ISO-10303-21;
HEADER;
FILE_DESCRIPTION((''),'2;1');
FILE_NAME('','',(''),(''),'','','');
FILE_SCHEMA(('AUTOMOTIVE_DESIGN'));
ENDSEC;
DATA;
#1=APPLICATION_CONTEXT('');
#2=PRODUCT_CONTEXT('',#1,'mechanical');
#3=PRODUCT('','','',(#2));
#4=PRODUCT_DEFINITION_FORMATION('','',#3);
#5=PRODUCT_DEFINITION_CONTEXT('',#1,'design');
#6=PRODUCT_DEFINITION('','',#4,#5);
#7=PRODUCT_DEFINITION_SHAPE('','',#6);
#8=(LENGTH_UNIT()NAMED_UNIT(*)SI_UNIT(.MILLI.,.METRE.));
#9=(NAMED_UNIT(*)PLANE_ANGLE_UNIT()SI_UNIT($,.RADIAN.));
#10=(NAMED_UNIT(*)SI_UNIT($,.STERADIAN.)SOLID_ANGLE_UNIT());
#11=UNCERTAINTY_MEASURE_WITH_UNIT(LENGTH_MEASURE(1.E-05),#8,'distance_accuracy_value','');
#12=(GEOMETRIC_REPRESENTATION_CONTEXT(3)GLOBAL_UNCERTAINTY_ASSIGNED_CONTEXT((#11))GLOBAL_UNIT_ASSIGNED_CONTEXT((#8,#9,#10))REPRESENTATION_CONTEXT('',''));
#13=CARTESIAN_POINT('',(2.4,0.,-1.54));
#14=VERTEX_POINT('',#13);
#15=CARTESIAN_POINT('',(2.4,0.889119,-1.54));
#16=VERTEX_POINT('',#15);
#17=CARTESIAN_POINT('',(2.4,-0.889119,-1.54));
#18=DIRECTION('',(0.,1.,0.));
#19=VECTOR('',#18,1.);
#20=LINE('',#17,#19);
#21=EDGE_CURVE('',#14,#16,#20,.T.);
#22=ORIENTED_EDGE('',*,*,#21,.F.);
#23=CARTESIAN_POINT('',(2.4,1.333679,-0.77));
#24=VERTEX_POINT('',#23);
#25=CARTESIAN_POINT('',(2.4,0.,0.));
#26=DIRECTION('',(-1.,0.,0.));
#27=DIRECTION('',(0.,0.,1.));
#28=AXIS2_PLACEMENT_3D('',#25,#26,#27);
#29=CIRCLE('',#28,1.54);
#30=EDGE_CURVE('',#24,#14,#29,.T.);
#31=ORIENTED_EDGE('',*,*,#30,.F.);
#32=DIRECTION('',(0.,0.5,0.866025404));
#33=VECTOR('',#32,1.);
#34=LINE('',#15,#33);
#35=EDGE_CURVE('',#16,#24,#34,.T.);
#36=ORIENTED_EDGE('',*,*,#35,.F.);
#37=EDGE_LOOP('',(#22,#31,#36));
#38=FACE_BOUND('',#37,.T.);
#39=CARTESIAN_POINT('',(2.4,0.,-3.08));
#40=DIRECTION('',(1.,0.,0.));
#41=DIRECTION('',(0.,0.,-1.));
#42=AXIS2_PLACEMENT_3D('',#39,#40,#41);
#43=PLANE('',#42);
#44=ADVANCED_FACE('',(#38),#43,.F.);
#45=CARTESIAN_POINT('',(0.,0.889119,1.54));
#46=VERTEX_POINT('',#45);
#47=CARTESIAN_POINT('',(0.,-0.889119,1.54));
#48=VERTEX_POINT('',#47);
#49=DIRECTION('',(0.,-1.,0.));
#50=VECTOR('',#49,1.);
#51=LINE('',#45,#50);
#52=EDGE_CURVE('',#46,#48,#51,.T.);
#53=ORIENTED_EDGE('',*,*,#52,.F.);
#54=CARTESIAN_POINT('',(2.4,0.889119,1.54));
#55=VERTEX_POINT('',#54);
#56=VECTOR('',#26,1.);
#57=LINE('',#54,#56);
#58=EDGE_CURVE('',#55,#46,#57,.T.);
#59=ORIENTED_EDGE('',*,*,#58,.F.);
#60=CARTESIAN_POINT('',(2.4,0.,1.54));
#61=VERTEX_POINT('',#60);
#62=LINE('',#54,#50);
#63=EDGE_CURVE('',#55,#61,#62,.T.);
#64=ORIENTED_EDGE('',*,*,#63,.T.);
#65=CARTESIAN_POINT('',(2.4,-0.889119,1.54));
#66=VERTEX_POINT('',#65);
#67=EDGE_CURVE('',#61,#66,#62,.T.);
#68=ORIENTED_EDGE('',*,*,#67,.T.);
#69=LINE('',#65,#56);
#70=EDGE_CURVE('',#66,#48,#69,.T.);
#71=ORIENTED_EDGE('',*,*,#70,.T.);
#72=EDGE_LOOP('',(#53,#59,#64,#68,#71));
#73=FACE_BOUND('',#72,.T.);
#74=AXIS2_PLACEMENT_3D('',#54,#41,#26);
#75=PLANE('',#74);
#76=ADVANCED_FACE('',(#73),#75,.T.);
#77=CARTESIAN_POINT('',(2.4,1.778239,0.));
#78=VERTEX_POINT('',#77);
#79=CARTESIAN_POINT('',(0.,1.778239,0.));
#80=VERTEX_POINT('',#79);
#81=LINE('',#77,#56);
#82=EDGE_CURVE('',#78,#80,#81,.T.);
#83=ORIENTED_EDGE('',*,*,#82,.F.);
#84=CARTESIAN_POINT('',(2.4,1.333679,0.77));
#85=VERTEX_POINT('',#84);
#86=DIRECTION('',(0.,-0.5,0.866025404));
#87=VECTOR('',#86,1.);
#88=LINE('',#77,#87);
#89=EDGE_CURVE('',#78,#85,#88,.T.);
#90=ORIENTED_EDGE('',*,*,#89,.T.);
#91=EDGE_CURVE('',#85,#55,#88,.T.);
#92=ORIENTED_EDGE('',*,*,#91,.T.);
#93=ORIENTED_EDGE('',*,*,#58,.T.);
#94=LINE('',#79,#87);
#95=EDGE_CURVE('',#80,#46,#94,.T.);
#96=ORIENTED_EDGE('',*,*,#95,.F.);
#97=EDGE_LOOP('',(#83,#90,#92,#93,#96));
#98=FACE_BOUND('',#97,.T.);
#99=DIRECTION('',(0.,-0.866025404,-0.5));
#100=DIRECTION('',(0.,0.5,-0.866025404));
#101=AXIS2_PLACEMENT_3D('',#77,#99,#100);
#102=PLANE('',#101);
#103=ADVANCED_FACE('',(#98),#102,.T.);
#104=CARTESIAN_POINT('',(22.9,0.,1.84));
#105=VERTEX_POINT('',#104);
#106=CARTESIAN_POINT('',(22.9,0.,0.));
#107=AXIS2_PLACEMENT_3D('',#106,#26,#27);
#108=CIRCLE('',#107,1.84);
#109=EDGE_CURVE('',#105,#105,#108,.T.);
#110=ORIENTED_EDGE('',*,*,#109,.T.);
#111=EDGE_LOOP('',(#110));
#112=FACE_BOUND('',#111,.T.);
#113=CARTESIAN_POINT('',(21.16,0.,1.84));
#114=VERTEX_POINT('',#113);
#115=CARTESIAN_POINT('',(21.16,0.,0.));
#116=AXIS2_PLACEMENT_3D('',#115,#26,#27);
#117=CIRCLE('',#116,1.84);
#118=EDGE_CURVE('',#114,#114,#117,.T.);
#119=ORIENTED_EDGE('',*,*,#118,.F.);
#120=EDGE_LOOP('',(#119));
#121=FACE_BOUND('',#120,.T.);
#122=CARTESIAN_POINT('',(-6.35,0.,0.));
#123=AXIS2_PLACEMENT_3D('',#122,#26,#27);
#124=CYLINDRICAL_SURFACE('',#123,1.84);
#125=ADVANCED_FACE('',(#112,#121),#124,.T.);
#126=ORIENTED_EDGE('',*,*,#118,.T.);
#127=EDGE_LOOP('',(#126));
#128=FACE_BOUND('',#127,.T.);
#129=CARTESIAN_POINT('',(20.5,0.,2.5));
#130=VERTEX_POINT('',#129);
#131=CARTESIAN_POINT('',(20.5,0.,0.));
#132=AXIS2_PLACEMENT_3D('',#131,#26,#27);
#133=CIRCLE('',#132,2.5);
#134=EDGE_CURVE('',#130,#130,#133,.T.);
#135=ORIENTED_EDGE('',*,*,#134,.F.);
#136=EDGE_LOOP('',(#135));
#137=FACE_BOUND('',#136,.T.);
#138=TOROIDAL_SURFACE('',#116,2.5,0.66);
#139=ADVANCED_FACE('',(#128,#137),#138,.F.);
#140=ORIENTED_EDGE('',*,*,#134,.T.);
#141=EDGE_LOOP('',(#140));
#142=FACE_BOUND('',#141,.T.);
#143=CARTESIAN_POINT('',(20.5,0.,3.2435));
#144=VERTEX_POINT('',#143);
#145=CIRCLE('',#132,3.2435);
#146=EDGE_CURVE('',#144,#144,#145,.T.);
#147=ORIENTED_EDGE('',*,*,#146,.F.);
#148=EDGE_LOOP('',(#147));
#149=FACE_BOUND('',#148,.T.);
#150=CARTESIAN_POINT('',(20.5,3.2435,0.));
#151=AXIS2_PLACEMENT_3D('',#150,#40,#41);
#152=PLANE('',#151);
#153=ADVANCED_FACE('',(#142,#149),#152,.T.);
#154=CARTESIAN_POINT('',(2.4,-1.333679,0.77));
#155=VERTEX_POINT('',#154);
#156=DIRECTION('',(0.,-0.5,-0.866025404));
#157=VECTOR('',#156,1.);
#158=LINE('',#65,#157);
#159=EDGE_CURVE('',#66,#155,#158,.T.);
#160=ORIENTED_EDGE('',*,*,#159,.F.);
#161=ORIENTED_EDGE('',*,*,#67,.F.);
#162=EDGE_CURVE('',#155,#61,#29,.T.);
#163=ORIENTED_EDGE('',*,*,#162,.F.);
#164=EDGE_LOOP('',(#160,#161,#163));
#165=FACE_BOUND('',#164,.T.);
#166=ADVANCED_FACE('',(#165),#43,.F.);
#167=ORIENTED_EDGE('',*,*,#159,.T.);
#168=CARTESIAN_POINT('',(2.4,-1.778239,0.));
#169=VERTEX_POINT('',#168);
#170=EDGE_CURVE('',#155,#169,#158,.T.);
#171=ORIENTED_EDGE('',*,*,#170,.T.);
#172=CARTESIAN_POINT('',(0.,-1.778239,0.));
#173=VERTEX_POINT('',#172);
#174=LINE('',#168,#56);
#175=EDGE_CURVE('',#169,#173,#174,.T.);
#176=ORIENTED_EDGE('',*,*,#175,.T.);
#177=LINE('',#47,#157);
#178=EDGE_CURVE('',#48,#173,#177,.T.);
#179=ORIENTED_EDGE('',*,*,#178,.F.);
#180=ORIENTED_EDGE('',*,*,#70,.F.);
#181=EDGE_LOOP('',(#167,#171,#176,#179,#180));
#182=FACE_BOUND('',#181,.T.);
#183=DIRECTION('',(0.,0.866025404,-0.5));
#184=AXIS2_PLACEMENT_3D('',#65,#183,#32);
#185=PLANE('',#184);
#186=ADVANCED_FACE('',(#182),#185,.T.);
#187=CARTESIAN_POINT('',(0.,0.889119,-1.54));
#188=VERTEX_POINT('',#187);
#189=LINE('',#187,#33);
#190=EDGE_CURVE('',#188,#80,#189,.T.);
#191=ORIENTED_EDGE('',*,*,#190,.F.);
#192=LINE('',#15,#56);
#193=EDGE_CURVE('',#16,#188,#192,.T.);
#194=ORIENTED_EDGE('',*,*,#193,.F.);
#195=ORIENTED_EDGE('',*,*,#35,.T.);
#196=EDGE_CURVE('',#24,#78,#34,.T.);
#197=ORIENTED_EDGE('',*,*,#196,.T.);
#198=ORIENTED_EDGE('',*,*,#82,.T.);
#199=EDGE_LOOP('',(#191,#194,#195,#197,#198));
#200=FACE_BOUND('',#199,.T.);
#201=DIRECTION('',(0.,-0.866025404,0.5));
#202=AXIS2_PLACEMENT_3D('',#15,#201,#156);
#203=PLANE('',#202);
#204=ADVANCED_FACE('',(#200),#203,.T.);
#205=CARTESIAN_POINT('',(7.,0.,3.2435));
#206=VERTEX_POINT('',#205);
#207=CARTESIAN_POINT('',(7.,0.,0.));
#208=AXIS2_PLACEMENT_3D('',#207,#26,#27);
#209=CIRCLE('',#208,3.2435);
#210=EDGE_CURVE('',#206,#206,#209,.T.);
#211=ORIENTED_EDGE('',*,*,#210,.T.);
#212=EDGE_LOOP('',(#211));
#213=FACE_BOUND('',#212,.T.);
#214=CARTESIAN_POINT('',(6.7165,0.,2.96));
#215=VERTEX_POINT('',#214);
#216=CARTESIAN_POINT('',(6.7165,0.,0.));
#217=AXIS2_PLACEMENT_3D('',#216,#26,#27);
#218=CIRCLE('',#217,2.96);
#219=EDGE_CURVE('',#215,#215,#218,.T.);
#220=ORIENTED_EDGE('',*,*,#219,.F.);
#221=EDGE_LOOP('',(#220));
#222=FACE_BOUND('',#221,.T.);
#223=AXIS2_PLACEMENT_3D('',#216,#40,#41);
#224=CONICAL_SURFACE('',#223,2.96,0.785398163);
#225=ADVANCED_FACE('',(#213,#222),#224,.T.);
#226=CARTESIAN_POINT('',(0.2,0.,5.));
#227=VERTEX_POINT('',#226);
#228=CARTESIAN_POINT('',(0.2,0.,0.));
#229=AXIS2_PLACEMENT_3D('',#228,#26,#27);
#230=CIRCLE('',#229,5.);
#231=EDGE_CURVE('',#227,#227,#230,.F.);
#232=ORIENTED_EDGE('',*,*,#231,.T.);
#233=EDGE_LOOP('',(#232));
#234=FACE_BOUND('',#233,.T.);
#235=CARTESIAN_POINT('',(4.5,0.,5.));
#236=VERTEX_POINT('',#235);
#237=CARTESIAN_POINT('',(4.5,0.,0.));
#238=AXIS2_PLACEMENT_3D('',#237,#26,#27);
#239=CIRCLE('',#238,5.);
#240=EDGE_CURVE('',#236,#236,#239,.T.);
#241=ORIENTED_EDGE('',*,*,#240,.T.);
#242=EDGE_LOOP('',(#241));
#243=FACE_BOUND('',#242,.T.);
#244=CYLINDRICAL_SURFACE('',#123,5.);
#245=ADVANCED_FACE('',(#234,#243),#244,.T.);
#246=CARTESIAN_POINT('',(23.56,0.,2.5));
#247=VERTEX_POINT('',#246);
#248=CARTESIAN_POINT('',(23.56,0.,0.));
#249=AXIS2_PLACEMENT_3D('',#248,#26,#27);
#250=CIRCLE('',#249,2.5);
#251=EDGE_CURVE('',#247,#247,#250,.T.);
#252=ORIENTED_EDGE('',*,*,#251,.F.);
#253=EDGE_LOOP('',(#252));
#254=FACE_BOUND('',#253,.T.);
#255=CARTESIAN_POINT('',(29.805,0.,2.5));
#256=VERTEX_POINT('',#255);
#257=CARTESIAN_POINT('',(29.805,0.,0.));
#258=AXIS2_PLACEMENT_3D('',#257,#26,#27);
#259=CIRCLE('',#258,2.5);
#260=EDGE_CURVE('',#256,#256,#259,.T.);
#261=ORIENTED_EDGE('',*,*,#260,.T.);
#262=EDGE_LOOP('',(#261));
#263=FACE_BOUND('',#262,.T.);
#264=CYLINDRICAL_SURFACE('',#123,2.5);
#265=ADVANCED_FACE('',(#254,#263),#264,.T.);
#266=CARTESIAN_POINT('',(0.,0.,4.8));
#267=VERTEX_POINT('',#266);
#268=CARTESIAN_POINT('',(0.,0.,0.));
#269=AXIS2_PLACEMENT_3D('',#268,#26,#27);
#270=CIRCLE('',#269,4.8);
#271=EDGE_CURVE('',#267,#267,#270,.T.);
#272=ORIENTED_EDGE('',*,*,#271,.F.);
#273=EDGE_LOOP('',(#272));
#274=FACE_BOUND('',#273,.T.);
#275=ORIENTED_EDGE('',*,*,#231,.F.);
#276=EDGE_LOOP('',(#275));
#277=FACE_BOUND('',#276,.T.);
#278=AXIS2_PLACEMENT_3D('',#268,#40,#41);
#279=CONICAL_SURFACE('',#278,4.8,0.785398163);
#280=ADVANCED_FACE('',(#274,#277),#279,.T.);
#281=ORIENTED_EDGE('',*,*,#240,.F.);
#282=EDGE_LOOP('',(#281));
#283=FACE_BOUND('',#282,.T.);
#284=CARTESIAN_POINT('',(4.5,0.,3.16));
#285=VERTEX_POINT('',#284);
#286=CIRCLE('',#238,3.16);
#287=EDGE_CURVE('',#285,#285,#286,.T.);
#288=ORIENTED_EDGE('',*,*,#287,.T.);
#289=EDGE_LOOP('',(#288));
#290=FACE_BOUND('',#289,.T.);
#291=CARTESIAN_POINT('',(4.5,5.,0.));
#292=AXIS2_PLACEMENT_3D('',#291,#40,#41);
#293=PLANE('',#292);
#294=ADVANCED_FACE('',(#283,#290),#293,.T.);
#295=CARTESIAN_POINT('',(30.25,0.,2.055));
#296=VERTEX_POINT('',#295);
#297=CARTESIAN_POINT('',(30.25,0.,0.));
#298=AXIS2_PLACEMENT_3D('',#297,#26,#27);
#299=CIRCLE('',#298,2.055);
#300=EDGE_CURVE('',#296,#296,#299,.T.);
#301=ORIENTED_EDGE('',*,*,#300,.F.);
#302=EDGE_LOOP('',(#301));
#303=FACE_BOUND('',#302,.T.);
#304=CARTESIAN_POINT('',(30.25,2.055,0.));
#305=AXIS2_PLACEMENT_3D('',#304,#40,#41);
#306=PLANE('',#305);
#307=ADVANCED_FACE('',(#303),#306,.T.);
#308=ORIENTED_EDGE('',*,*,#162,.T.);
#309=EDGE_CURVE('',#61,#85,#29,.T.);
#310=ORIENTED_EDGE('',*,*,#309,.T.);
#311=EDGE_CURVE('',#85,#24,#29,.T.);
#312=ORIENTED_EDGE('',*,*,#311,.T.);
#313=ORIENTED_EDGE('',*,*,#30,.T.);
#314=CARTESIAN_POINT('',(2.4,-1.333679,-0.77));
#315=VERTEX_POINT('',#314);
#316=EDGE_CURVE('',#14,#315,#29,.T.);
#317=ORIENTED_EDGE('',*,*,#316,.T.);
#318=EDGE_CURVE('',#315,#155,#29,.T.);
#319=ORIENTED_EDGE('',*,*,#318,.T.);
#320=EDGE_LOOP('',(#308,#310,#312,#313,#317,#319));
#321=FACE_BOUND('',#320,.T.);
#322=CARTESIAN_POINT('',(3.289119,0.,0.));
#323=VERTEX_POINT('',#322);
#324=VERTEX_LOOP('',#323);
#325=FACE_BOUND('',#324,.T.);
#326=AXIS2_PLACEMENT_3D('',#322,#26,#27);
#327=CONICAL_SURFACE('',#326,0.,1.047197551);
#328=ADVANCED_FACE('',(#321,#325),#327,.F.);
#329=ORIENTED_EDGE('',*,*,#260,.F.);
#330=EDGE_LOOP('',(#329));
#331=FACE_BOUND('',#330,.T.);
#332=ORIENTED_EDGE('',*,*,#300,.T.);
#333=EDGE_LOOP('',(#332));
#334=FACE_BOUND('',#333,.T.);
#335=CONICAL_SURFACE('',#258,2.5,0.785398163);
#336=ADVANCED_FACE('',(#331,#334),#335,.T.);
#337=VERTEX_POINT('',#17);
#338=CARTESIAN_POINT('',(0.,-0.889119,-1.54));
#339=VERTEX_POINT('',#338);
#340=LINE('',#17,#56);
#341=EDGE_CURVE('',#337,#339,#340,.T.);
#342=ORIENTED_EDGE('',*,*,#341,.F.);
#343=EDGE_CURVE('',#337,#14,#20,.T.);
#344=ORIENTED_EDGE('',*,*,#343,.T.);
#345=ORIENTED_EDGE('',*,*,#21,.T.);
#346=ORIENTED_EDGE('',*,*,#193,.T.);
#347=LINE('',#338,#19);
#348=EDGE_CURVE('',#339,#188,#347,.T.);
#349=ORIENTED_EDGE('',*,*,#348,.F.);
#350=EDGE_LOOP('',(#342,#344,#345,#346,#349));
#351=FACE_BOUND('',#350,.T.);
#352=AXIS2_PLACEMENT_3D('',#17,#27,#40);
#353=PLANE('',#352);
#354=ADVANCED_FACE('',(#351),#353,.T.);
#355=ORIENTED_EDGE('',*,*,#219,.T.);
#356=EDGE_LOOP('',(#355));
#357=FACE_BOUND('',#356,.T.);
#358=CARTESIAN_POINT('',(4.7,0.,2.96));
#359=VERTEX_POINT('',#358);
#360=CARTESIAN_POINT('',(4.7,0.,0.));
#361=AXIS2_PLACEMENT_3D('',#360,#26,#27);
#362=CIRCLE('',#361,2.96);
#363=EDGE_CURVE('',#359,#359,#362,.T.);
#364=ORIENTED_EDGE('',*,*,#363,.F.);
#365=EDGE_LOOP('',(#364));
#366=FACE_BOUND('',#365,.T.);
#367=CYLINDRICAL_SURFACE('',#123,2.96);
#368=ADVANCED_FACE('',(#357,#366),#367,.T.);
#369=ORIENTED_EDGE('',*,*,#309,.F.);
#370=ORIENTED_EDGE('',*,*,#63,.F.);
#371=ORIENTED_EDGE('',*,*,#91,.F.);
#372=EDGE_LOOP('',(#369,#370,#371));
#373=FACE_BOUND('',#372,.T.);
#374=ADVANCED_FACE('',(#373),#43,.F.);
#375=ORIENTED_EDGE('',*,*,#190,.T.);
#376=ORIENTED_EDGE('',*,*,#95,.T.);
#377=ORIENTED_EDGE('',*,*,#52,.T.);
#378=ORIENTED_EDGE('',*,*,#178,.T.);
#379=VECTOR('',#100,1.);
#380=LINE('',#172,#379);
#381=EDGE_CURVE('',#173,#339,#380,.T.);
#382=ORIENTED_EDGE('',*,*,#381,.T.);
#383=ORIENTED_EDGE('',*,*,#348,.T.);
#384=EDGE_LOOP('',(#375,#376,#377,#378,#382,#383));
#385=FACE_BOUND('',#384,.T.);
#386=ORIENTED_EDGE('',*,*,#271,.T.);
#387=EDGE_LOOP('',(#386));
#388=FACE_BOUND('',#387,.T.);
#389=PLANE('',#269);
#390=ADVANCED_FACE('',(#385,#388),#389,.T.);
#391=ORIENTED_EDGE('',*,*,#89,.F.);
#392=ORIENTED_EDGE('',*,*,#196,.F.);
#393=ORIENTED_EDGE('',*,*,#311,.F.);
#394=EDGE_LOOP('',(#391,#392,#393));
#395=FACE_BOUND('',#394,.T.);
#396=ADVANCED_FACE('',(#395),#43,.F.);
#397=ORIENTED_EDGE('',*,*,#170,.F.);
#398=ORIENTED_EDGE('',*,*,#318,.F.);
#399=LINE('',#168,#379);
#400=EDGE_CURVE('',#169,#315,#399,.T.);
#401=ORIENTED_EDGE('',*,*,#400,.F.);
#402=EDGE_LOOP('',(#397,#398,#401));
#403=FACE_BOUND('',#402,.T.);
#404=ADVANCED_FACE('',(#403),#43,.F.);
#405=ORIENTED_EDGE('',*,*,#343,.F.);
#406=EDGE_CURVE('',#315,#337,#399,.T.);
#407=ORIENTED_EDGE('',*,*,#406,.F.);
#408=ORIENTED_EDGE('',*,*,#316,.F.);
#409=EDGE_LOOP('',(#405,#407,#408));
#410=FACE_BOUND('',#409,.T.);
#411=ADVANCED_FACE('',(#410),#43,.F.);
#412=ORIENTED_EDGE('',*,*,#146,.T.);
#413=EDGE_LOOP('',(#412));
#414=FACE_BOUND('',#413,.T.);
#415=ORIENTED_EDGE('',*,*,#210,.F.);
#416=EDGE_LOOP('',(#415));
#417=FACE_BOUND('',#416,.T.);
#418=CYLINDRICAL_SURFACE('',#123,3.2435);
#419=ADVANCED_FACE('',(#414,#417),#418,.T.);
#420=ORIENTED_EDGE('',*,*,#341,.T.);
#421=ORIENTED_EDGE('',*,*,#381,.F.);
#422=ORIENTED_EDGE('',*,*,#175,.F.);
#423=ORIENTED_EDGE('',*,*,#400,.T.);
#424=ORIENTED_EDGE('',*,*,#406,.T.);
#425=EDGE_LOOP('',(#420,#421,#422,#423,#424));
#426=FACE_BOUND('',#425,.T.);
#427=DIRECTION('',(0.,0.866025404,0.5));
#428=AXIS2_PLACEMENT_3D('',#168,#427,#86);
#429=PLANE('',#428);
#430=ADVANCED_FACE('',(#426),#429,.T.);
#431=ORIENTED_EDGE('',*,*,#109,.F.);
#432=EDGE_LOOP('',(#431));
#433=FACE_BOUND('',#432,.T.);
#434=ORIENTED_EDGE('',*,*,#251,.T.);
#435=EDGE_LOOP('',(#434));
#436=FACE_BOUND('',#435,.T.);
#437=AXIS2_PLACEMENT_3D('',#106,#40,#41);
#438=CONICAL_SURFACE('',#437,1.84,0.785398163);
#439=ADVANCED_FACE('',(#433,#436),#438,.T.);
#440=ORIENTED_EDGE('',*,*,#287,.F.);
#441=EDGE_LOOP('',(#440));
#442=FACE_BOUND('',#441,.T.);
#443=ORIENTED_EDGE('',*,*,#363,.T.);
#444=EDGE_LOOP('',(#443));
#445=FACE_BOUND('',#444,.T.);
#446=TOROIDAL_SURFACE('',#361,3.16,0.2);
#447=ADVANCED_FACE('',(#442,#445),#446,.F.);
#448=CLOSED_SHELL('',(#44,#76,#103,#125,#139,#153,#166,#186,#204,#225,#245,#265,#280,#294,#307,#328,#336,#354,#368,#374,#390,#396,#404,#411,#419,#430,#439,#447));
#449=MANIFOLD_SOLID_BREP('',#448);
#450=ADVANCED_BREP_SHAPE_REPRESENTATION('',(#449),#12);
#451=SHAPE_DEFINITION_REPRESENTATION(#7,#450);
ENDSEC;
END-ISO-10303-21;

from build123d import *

# Parameters (mm, degrees)
CHAMFER1_SIZE = 0.2
HEX_2_DEPTH   = 2.4


# Read off the part's stored shape, not the designer's step: ThreadSchematic
with BuildPart() as part:
    # ThreadSchematic outline → ThreadSchematic (revolve)
    with BuildSketch(Plane.YX):
        with BuildLine():
            Line((0, 30.25), (0, 0))
            Line((0, 0), (5, 0))
            Line((5, 0), (5, 4.5))
            Line((5, 4.5), (3.16, 4.5))
            ThreePointArc((3.16, 4.5), (3.018578644, 4.558578644), (2.96, 4.7))
            Line((2.96, 4.7), (2.96, 6.7165))
            Line((2.96, 6.7165), (3.2435, 7))
            Line((3.2435, 7), (3.2435, 20.5))
            Line((3.2435, 20.5), (2.5, 20.5))
            ThreePointArc((2.5, 20.5), (2.033309524, 20.693309524), (1.84, 21.16))
            Line((1.84, 21.16), (1.84, 22.9))
            Line((1.84, 22.9), (2.5, 23.56))
            Line((2.5, 23.56), (2.5, 29.805))
            Line((2.5, 29.805), (2.055, 30.25))
            Line((2.055, 30.25), (0, 30.25))
        make_face()
    revolve(axis=Axis((0, 0, 0), (1, 0, 0)))

    # Chamfer1
    chamfer1_edges = [part.edges().sort_by_distance(p)[0] for p in [
        (0, -5, 0),
    ]]
    chamfer(chamfer1_edges, length=CHAMFER1_SIZE)

    # Sketch2 → PreBroach (revolve, cut)
    with BuildSketch(Plane.XY, mode=Mode.PRIVATE) as prebroach_sk:
        Polygon((0, 1.54), (2.4, 1.54), (3.289119415, 0), (0, 0), align=None)
    revolve(prebroach_sk.sketch.rotate(Axis((0, 0, 0), (1, 0, 0)), 90), axis=Axis((0, 0, 0), (1, 0, 0)), mode=Mode.SUBTRACT)

    # Sketch3 → Hex 2 (cut)
    with BuildSketch(Plane.ZY):
        Polygon((-1.54, -0.889119415), (-1.54, 0.889119415), (0, 1.778238829), (1.54, 0.889119415), (1.54, -0.889119415), (0, -1.778238829), align=None)
    extrude(amount=-HEX_2_DEPTH, mode=Mode.SUBTRACT)


solid = part.part
